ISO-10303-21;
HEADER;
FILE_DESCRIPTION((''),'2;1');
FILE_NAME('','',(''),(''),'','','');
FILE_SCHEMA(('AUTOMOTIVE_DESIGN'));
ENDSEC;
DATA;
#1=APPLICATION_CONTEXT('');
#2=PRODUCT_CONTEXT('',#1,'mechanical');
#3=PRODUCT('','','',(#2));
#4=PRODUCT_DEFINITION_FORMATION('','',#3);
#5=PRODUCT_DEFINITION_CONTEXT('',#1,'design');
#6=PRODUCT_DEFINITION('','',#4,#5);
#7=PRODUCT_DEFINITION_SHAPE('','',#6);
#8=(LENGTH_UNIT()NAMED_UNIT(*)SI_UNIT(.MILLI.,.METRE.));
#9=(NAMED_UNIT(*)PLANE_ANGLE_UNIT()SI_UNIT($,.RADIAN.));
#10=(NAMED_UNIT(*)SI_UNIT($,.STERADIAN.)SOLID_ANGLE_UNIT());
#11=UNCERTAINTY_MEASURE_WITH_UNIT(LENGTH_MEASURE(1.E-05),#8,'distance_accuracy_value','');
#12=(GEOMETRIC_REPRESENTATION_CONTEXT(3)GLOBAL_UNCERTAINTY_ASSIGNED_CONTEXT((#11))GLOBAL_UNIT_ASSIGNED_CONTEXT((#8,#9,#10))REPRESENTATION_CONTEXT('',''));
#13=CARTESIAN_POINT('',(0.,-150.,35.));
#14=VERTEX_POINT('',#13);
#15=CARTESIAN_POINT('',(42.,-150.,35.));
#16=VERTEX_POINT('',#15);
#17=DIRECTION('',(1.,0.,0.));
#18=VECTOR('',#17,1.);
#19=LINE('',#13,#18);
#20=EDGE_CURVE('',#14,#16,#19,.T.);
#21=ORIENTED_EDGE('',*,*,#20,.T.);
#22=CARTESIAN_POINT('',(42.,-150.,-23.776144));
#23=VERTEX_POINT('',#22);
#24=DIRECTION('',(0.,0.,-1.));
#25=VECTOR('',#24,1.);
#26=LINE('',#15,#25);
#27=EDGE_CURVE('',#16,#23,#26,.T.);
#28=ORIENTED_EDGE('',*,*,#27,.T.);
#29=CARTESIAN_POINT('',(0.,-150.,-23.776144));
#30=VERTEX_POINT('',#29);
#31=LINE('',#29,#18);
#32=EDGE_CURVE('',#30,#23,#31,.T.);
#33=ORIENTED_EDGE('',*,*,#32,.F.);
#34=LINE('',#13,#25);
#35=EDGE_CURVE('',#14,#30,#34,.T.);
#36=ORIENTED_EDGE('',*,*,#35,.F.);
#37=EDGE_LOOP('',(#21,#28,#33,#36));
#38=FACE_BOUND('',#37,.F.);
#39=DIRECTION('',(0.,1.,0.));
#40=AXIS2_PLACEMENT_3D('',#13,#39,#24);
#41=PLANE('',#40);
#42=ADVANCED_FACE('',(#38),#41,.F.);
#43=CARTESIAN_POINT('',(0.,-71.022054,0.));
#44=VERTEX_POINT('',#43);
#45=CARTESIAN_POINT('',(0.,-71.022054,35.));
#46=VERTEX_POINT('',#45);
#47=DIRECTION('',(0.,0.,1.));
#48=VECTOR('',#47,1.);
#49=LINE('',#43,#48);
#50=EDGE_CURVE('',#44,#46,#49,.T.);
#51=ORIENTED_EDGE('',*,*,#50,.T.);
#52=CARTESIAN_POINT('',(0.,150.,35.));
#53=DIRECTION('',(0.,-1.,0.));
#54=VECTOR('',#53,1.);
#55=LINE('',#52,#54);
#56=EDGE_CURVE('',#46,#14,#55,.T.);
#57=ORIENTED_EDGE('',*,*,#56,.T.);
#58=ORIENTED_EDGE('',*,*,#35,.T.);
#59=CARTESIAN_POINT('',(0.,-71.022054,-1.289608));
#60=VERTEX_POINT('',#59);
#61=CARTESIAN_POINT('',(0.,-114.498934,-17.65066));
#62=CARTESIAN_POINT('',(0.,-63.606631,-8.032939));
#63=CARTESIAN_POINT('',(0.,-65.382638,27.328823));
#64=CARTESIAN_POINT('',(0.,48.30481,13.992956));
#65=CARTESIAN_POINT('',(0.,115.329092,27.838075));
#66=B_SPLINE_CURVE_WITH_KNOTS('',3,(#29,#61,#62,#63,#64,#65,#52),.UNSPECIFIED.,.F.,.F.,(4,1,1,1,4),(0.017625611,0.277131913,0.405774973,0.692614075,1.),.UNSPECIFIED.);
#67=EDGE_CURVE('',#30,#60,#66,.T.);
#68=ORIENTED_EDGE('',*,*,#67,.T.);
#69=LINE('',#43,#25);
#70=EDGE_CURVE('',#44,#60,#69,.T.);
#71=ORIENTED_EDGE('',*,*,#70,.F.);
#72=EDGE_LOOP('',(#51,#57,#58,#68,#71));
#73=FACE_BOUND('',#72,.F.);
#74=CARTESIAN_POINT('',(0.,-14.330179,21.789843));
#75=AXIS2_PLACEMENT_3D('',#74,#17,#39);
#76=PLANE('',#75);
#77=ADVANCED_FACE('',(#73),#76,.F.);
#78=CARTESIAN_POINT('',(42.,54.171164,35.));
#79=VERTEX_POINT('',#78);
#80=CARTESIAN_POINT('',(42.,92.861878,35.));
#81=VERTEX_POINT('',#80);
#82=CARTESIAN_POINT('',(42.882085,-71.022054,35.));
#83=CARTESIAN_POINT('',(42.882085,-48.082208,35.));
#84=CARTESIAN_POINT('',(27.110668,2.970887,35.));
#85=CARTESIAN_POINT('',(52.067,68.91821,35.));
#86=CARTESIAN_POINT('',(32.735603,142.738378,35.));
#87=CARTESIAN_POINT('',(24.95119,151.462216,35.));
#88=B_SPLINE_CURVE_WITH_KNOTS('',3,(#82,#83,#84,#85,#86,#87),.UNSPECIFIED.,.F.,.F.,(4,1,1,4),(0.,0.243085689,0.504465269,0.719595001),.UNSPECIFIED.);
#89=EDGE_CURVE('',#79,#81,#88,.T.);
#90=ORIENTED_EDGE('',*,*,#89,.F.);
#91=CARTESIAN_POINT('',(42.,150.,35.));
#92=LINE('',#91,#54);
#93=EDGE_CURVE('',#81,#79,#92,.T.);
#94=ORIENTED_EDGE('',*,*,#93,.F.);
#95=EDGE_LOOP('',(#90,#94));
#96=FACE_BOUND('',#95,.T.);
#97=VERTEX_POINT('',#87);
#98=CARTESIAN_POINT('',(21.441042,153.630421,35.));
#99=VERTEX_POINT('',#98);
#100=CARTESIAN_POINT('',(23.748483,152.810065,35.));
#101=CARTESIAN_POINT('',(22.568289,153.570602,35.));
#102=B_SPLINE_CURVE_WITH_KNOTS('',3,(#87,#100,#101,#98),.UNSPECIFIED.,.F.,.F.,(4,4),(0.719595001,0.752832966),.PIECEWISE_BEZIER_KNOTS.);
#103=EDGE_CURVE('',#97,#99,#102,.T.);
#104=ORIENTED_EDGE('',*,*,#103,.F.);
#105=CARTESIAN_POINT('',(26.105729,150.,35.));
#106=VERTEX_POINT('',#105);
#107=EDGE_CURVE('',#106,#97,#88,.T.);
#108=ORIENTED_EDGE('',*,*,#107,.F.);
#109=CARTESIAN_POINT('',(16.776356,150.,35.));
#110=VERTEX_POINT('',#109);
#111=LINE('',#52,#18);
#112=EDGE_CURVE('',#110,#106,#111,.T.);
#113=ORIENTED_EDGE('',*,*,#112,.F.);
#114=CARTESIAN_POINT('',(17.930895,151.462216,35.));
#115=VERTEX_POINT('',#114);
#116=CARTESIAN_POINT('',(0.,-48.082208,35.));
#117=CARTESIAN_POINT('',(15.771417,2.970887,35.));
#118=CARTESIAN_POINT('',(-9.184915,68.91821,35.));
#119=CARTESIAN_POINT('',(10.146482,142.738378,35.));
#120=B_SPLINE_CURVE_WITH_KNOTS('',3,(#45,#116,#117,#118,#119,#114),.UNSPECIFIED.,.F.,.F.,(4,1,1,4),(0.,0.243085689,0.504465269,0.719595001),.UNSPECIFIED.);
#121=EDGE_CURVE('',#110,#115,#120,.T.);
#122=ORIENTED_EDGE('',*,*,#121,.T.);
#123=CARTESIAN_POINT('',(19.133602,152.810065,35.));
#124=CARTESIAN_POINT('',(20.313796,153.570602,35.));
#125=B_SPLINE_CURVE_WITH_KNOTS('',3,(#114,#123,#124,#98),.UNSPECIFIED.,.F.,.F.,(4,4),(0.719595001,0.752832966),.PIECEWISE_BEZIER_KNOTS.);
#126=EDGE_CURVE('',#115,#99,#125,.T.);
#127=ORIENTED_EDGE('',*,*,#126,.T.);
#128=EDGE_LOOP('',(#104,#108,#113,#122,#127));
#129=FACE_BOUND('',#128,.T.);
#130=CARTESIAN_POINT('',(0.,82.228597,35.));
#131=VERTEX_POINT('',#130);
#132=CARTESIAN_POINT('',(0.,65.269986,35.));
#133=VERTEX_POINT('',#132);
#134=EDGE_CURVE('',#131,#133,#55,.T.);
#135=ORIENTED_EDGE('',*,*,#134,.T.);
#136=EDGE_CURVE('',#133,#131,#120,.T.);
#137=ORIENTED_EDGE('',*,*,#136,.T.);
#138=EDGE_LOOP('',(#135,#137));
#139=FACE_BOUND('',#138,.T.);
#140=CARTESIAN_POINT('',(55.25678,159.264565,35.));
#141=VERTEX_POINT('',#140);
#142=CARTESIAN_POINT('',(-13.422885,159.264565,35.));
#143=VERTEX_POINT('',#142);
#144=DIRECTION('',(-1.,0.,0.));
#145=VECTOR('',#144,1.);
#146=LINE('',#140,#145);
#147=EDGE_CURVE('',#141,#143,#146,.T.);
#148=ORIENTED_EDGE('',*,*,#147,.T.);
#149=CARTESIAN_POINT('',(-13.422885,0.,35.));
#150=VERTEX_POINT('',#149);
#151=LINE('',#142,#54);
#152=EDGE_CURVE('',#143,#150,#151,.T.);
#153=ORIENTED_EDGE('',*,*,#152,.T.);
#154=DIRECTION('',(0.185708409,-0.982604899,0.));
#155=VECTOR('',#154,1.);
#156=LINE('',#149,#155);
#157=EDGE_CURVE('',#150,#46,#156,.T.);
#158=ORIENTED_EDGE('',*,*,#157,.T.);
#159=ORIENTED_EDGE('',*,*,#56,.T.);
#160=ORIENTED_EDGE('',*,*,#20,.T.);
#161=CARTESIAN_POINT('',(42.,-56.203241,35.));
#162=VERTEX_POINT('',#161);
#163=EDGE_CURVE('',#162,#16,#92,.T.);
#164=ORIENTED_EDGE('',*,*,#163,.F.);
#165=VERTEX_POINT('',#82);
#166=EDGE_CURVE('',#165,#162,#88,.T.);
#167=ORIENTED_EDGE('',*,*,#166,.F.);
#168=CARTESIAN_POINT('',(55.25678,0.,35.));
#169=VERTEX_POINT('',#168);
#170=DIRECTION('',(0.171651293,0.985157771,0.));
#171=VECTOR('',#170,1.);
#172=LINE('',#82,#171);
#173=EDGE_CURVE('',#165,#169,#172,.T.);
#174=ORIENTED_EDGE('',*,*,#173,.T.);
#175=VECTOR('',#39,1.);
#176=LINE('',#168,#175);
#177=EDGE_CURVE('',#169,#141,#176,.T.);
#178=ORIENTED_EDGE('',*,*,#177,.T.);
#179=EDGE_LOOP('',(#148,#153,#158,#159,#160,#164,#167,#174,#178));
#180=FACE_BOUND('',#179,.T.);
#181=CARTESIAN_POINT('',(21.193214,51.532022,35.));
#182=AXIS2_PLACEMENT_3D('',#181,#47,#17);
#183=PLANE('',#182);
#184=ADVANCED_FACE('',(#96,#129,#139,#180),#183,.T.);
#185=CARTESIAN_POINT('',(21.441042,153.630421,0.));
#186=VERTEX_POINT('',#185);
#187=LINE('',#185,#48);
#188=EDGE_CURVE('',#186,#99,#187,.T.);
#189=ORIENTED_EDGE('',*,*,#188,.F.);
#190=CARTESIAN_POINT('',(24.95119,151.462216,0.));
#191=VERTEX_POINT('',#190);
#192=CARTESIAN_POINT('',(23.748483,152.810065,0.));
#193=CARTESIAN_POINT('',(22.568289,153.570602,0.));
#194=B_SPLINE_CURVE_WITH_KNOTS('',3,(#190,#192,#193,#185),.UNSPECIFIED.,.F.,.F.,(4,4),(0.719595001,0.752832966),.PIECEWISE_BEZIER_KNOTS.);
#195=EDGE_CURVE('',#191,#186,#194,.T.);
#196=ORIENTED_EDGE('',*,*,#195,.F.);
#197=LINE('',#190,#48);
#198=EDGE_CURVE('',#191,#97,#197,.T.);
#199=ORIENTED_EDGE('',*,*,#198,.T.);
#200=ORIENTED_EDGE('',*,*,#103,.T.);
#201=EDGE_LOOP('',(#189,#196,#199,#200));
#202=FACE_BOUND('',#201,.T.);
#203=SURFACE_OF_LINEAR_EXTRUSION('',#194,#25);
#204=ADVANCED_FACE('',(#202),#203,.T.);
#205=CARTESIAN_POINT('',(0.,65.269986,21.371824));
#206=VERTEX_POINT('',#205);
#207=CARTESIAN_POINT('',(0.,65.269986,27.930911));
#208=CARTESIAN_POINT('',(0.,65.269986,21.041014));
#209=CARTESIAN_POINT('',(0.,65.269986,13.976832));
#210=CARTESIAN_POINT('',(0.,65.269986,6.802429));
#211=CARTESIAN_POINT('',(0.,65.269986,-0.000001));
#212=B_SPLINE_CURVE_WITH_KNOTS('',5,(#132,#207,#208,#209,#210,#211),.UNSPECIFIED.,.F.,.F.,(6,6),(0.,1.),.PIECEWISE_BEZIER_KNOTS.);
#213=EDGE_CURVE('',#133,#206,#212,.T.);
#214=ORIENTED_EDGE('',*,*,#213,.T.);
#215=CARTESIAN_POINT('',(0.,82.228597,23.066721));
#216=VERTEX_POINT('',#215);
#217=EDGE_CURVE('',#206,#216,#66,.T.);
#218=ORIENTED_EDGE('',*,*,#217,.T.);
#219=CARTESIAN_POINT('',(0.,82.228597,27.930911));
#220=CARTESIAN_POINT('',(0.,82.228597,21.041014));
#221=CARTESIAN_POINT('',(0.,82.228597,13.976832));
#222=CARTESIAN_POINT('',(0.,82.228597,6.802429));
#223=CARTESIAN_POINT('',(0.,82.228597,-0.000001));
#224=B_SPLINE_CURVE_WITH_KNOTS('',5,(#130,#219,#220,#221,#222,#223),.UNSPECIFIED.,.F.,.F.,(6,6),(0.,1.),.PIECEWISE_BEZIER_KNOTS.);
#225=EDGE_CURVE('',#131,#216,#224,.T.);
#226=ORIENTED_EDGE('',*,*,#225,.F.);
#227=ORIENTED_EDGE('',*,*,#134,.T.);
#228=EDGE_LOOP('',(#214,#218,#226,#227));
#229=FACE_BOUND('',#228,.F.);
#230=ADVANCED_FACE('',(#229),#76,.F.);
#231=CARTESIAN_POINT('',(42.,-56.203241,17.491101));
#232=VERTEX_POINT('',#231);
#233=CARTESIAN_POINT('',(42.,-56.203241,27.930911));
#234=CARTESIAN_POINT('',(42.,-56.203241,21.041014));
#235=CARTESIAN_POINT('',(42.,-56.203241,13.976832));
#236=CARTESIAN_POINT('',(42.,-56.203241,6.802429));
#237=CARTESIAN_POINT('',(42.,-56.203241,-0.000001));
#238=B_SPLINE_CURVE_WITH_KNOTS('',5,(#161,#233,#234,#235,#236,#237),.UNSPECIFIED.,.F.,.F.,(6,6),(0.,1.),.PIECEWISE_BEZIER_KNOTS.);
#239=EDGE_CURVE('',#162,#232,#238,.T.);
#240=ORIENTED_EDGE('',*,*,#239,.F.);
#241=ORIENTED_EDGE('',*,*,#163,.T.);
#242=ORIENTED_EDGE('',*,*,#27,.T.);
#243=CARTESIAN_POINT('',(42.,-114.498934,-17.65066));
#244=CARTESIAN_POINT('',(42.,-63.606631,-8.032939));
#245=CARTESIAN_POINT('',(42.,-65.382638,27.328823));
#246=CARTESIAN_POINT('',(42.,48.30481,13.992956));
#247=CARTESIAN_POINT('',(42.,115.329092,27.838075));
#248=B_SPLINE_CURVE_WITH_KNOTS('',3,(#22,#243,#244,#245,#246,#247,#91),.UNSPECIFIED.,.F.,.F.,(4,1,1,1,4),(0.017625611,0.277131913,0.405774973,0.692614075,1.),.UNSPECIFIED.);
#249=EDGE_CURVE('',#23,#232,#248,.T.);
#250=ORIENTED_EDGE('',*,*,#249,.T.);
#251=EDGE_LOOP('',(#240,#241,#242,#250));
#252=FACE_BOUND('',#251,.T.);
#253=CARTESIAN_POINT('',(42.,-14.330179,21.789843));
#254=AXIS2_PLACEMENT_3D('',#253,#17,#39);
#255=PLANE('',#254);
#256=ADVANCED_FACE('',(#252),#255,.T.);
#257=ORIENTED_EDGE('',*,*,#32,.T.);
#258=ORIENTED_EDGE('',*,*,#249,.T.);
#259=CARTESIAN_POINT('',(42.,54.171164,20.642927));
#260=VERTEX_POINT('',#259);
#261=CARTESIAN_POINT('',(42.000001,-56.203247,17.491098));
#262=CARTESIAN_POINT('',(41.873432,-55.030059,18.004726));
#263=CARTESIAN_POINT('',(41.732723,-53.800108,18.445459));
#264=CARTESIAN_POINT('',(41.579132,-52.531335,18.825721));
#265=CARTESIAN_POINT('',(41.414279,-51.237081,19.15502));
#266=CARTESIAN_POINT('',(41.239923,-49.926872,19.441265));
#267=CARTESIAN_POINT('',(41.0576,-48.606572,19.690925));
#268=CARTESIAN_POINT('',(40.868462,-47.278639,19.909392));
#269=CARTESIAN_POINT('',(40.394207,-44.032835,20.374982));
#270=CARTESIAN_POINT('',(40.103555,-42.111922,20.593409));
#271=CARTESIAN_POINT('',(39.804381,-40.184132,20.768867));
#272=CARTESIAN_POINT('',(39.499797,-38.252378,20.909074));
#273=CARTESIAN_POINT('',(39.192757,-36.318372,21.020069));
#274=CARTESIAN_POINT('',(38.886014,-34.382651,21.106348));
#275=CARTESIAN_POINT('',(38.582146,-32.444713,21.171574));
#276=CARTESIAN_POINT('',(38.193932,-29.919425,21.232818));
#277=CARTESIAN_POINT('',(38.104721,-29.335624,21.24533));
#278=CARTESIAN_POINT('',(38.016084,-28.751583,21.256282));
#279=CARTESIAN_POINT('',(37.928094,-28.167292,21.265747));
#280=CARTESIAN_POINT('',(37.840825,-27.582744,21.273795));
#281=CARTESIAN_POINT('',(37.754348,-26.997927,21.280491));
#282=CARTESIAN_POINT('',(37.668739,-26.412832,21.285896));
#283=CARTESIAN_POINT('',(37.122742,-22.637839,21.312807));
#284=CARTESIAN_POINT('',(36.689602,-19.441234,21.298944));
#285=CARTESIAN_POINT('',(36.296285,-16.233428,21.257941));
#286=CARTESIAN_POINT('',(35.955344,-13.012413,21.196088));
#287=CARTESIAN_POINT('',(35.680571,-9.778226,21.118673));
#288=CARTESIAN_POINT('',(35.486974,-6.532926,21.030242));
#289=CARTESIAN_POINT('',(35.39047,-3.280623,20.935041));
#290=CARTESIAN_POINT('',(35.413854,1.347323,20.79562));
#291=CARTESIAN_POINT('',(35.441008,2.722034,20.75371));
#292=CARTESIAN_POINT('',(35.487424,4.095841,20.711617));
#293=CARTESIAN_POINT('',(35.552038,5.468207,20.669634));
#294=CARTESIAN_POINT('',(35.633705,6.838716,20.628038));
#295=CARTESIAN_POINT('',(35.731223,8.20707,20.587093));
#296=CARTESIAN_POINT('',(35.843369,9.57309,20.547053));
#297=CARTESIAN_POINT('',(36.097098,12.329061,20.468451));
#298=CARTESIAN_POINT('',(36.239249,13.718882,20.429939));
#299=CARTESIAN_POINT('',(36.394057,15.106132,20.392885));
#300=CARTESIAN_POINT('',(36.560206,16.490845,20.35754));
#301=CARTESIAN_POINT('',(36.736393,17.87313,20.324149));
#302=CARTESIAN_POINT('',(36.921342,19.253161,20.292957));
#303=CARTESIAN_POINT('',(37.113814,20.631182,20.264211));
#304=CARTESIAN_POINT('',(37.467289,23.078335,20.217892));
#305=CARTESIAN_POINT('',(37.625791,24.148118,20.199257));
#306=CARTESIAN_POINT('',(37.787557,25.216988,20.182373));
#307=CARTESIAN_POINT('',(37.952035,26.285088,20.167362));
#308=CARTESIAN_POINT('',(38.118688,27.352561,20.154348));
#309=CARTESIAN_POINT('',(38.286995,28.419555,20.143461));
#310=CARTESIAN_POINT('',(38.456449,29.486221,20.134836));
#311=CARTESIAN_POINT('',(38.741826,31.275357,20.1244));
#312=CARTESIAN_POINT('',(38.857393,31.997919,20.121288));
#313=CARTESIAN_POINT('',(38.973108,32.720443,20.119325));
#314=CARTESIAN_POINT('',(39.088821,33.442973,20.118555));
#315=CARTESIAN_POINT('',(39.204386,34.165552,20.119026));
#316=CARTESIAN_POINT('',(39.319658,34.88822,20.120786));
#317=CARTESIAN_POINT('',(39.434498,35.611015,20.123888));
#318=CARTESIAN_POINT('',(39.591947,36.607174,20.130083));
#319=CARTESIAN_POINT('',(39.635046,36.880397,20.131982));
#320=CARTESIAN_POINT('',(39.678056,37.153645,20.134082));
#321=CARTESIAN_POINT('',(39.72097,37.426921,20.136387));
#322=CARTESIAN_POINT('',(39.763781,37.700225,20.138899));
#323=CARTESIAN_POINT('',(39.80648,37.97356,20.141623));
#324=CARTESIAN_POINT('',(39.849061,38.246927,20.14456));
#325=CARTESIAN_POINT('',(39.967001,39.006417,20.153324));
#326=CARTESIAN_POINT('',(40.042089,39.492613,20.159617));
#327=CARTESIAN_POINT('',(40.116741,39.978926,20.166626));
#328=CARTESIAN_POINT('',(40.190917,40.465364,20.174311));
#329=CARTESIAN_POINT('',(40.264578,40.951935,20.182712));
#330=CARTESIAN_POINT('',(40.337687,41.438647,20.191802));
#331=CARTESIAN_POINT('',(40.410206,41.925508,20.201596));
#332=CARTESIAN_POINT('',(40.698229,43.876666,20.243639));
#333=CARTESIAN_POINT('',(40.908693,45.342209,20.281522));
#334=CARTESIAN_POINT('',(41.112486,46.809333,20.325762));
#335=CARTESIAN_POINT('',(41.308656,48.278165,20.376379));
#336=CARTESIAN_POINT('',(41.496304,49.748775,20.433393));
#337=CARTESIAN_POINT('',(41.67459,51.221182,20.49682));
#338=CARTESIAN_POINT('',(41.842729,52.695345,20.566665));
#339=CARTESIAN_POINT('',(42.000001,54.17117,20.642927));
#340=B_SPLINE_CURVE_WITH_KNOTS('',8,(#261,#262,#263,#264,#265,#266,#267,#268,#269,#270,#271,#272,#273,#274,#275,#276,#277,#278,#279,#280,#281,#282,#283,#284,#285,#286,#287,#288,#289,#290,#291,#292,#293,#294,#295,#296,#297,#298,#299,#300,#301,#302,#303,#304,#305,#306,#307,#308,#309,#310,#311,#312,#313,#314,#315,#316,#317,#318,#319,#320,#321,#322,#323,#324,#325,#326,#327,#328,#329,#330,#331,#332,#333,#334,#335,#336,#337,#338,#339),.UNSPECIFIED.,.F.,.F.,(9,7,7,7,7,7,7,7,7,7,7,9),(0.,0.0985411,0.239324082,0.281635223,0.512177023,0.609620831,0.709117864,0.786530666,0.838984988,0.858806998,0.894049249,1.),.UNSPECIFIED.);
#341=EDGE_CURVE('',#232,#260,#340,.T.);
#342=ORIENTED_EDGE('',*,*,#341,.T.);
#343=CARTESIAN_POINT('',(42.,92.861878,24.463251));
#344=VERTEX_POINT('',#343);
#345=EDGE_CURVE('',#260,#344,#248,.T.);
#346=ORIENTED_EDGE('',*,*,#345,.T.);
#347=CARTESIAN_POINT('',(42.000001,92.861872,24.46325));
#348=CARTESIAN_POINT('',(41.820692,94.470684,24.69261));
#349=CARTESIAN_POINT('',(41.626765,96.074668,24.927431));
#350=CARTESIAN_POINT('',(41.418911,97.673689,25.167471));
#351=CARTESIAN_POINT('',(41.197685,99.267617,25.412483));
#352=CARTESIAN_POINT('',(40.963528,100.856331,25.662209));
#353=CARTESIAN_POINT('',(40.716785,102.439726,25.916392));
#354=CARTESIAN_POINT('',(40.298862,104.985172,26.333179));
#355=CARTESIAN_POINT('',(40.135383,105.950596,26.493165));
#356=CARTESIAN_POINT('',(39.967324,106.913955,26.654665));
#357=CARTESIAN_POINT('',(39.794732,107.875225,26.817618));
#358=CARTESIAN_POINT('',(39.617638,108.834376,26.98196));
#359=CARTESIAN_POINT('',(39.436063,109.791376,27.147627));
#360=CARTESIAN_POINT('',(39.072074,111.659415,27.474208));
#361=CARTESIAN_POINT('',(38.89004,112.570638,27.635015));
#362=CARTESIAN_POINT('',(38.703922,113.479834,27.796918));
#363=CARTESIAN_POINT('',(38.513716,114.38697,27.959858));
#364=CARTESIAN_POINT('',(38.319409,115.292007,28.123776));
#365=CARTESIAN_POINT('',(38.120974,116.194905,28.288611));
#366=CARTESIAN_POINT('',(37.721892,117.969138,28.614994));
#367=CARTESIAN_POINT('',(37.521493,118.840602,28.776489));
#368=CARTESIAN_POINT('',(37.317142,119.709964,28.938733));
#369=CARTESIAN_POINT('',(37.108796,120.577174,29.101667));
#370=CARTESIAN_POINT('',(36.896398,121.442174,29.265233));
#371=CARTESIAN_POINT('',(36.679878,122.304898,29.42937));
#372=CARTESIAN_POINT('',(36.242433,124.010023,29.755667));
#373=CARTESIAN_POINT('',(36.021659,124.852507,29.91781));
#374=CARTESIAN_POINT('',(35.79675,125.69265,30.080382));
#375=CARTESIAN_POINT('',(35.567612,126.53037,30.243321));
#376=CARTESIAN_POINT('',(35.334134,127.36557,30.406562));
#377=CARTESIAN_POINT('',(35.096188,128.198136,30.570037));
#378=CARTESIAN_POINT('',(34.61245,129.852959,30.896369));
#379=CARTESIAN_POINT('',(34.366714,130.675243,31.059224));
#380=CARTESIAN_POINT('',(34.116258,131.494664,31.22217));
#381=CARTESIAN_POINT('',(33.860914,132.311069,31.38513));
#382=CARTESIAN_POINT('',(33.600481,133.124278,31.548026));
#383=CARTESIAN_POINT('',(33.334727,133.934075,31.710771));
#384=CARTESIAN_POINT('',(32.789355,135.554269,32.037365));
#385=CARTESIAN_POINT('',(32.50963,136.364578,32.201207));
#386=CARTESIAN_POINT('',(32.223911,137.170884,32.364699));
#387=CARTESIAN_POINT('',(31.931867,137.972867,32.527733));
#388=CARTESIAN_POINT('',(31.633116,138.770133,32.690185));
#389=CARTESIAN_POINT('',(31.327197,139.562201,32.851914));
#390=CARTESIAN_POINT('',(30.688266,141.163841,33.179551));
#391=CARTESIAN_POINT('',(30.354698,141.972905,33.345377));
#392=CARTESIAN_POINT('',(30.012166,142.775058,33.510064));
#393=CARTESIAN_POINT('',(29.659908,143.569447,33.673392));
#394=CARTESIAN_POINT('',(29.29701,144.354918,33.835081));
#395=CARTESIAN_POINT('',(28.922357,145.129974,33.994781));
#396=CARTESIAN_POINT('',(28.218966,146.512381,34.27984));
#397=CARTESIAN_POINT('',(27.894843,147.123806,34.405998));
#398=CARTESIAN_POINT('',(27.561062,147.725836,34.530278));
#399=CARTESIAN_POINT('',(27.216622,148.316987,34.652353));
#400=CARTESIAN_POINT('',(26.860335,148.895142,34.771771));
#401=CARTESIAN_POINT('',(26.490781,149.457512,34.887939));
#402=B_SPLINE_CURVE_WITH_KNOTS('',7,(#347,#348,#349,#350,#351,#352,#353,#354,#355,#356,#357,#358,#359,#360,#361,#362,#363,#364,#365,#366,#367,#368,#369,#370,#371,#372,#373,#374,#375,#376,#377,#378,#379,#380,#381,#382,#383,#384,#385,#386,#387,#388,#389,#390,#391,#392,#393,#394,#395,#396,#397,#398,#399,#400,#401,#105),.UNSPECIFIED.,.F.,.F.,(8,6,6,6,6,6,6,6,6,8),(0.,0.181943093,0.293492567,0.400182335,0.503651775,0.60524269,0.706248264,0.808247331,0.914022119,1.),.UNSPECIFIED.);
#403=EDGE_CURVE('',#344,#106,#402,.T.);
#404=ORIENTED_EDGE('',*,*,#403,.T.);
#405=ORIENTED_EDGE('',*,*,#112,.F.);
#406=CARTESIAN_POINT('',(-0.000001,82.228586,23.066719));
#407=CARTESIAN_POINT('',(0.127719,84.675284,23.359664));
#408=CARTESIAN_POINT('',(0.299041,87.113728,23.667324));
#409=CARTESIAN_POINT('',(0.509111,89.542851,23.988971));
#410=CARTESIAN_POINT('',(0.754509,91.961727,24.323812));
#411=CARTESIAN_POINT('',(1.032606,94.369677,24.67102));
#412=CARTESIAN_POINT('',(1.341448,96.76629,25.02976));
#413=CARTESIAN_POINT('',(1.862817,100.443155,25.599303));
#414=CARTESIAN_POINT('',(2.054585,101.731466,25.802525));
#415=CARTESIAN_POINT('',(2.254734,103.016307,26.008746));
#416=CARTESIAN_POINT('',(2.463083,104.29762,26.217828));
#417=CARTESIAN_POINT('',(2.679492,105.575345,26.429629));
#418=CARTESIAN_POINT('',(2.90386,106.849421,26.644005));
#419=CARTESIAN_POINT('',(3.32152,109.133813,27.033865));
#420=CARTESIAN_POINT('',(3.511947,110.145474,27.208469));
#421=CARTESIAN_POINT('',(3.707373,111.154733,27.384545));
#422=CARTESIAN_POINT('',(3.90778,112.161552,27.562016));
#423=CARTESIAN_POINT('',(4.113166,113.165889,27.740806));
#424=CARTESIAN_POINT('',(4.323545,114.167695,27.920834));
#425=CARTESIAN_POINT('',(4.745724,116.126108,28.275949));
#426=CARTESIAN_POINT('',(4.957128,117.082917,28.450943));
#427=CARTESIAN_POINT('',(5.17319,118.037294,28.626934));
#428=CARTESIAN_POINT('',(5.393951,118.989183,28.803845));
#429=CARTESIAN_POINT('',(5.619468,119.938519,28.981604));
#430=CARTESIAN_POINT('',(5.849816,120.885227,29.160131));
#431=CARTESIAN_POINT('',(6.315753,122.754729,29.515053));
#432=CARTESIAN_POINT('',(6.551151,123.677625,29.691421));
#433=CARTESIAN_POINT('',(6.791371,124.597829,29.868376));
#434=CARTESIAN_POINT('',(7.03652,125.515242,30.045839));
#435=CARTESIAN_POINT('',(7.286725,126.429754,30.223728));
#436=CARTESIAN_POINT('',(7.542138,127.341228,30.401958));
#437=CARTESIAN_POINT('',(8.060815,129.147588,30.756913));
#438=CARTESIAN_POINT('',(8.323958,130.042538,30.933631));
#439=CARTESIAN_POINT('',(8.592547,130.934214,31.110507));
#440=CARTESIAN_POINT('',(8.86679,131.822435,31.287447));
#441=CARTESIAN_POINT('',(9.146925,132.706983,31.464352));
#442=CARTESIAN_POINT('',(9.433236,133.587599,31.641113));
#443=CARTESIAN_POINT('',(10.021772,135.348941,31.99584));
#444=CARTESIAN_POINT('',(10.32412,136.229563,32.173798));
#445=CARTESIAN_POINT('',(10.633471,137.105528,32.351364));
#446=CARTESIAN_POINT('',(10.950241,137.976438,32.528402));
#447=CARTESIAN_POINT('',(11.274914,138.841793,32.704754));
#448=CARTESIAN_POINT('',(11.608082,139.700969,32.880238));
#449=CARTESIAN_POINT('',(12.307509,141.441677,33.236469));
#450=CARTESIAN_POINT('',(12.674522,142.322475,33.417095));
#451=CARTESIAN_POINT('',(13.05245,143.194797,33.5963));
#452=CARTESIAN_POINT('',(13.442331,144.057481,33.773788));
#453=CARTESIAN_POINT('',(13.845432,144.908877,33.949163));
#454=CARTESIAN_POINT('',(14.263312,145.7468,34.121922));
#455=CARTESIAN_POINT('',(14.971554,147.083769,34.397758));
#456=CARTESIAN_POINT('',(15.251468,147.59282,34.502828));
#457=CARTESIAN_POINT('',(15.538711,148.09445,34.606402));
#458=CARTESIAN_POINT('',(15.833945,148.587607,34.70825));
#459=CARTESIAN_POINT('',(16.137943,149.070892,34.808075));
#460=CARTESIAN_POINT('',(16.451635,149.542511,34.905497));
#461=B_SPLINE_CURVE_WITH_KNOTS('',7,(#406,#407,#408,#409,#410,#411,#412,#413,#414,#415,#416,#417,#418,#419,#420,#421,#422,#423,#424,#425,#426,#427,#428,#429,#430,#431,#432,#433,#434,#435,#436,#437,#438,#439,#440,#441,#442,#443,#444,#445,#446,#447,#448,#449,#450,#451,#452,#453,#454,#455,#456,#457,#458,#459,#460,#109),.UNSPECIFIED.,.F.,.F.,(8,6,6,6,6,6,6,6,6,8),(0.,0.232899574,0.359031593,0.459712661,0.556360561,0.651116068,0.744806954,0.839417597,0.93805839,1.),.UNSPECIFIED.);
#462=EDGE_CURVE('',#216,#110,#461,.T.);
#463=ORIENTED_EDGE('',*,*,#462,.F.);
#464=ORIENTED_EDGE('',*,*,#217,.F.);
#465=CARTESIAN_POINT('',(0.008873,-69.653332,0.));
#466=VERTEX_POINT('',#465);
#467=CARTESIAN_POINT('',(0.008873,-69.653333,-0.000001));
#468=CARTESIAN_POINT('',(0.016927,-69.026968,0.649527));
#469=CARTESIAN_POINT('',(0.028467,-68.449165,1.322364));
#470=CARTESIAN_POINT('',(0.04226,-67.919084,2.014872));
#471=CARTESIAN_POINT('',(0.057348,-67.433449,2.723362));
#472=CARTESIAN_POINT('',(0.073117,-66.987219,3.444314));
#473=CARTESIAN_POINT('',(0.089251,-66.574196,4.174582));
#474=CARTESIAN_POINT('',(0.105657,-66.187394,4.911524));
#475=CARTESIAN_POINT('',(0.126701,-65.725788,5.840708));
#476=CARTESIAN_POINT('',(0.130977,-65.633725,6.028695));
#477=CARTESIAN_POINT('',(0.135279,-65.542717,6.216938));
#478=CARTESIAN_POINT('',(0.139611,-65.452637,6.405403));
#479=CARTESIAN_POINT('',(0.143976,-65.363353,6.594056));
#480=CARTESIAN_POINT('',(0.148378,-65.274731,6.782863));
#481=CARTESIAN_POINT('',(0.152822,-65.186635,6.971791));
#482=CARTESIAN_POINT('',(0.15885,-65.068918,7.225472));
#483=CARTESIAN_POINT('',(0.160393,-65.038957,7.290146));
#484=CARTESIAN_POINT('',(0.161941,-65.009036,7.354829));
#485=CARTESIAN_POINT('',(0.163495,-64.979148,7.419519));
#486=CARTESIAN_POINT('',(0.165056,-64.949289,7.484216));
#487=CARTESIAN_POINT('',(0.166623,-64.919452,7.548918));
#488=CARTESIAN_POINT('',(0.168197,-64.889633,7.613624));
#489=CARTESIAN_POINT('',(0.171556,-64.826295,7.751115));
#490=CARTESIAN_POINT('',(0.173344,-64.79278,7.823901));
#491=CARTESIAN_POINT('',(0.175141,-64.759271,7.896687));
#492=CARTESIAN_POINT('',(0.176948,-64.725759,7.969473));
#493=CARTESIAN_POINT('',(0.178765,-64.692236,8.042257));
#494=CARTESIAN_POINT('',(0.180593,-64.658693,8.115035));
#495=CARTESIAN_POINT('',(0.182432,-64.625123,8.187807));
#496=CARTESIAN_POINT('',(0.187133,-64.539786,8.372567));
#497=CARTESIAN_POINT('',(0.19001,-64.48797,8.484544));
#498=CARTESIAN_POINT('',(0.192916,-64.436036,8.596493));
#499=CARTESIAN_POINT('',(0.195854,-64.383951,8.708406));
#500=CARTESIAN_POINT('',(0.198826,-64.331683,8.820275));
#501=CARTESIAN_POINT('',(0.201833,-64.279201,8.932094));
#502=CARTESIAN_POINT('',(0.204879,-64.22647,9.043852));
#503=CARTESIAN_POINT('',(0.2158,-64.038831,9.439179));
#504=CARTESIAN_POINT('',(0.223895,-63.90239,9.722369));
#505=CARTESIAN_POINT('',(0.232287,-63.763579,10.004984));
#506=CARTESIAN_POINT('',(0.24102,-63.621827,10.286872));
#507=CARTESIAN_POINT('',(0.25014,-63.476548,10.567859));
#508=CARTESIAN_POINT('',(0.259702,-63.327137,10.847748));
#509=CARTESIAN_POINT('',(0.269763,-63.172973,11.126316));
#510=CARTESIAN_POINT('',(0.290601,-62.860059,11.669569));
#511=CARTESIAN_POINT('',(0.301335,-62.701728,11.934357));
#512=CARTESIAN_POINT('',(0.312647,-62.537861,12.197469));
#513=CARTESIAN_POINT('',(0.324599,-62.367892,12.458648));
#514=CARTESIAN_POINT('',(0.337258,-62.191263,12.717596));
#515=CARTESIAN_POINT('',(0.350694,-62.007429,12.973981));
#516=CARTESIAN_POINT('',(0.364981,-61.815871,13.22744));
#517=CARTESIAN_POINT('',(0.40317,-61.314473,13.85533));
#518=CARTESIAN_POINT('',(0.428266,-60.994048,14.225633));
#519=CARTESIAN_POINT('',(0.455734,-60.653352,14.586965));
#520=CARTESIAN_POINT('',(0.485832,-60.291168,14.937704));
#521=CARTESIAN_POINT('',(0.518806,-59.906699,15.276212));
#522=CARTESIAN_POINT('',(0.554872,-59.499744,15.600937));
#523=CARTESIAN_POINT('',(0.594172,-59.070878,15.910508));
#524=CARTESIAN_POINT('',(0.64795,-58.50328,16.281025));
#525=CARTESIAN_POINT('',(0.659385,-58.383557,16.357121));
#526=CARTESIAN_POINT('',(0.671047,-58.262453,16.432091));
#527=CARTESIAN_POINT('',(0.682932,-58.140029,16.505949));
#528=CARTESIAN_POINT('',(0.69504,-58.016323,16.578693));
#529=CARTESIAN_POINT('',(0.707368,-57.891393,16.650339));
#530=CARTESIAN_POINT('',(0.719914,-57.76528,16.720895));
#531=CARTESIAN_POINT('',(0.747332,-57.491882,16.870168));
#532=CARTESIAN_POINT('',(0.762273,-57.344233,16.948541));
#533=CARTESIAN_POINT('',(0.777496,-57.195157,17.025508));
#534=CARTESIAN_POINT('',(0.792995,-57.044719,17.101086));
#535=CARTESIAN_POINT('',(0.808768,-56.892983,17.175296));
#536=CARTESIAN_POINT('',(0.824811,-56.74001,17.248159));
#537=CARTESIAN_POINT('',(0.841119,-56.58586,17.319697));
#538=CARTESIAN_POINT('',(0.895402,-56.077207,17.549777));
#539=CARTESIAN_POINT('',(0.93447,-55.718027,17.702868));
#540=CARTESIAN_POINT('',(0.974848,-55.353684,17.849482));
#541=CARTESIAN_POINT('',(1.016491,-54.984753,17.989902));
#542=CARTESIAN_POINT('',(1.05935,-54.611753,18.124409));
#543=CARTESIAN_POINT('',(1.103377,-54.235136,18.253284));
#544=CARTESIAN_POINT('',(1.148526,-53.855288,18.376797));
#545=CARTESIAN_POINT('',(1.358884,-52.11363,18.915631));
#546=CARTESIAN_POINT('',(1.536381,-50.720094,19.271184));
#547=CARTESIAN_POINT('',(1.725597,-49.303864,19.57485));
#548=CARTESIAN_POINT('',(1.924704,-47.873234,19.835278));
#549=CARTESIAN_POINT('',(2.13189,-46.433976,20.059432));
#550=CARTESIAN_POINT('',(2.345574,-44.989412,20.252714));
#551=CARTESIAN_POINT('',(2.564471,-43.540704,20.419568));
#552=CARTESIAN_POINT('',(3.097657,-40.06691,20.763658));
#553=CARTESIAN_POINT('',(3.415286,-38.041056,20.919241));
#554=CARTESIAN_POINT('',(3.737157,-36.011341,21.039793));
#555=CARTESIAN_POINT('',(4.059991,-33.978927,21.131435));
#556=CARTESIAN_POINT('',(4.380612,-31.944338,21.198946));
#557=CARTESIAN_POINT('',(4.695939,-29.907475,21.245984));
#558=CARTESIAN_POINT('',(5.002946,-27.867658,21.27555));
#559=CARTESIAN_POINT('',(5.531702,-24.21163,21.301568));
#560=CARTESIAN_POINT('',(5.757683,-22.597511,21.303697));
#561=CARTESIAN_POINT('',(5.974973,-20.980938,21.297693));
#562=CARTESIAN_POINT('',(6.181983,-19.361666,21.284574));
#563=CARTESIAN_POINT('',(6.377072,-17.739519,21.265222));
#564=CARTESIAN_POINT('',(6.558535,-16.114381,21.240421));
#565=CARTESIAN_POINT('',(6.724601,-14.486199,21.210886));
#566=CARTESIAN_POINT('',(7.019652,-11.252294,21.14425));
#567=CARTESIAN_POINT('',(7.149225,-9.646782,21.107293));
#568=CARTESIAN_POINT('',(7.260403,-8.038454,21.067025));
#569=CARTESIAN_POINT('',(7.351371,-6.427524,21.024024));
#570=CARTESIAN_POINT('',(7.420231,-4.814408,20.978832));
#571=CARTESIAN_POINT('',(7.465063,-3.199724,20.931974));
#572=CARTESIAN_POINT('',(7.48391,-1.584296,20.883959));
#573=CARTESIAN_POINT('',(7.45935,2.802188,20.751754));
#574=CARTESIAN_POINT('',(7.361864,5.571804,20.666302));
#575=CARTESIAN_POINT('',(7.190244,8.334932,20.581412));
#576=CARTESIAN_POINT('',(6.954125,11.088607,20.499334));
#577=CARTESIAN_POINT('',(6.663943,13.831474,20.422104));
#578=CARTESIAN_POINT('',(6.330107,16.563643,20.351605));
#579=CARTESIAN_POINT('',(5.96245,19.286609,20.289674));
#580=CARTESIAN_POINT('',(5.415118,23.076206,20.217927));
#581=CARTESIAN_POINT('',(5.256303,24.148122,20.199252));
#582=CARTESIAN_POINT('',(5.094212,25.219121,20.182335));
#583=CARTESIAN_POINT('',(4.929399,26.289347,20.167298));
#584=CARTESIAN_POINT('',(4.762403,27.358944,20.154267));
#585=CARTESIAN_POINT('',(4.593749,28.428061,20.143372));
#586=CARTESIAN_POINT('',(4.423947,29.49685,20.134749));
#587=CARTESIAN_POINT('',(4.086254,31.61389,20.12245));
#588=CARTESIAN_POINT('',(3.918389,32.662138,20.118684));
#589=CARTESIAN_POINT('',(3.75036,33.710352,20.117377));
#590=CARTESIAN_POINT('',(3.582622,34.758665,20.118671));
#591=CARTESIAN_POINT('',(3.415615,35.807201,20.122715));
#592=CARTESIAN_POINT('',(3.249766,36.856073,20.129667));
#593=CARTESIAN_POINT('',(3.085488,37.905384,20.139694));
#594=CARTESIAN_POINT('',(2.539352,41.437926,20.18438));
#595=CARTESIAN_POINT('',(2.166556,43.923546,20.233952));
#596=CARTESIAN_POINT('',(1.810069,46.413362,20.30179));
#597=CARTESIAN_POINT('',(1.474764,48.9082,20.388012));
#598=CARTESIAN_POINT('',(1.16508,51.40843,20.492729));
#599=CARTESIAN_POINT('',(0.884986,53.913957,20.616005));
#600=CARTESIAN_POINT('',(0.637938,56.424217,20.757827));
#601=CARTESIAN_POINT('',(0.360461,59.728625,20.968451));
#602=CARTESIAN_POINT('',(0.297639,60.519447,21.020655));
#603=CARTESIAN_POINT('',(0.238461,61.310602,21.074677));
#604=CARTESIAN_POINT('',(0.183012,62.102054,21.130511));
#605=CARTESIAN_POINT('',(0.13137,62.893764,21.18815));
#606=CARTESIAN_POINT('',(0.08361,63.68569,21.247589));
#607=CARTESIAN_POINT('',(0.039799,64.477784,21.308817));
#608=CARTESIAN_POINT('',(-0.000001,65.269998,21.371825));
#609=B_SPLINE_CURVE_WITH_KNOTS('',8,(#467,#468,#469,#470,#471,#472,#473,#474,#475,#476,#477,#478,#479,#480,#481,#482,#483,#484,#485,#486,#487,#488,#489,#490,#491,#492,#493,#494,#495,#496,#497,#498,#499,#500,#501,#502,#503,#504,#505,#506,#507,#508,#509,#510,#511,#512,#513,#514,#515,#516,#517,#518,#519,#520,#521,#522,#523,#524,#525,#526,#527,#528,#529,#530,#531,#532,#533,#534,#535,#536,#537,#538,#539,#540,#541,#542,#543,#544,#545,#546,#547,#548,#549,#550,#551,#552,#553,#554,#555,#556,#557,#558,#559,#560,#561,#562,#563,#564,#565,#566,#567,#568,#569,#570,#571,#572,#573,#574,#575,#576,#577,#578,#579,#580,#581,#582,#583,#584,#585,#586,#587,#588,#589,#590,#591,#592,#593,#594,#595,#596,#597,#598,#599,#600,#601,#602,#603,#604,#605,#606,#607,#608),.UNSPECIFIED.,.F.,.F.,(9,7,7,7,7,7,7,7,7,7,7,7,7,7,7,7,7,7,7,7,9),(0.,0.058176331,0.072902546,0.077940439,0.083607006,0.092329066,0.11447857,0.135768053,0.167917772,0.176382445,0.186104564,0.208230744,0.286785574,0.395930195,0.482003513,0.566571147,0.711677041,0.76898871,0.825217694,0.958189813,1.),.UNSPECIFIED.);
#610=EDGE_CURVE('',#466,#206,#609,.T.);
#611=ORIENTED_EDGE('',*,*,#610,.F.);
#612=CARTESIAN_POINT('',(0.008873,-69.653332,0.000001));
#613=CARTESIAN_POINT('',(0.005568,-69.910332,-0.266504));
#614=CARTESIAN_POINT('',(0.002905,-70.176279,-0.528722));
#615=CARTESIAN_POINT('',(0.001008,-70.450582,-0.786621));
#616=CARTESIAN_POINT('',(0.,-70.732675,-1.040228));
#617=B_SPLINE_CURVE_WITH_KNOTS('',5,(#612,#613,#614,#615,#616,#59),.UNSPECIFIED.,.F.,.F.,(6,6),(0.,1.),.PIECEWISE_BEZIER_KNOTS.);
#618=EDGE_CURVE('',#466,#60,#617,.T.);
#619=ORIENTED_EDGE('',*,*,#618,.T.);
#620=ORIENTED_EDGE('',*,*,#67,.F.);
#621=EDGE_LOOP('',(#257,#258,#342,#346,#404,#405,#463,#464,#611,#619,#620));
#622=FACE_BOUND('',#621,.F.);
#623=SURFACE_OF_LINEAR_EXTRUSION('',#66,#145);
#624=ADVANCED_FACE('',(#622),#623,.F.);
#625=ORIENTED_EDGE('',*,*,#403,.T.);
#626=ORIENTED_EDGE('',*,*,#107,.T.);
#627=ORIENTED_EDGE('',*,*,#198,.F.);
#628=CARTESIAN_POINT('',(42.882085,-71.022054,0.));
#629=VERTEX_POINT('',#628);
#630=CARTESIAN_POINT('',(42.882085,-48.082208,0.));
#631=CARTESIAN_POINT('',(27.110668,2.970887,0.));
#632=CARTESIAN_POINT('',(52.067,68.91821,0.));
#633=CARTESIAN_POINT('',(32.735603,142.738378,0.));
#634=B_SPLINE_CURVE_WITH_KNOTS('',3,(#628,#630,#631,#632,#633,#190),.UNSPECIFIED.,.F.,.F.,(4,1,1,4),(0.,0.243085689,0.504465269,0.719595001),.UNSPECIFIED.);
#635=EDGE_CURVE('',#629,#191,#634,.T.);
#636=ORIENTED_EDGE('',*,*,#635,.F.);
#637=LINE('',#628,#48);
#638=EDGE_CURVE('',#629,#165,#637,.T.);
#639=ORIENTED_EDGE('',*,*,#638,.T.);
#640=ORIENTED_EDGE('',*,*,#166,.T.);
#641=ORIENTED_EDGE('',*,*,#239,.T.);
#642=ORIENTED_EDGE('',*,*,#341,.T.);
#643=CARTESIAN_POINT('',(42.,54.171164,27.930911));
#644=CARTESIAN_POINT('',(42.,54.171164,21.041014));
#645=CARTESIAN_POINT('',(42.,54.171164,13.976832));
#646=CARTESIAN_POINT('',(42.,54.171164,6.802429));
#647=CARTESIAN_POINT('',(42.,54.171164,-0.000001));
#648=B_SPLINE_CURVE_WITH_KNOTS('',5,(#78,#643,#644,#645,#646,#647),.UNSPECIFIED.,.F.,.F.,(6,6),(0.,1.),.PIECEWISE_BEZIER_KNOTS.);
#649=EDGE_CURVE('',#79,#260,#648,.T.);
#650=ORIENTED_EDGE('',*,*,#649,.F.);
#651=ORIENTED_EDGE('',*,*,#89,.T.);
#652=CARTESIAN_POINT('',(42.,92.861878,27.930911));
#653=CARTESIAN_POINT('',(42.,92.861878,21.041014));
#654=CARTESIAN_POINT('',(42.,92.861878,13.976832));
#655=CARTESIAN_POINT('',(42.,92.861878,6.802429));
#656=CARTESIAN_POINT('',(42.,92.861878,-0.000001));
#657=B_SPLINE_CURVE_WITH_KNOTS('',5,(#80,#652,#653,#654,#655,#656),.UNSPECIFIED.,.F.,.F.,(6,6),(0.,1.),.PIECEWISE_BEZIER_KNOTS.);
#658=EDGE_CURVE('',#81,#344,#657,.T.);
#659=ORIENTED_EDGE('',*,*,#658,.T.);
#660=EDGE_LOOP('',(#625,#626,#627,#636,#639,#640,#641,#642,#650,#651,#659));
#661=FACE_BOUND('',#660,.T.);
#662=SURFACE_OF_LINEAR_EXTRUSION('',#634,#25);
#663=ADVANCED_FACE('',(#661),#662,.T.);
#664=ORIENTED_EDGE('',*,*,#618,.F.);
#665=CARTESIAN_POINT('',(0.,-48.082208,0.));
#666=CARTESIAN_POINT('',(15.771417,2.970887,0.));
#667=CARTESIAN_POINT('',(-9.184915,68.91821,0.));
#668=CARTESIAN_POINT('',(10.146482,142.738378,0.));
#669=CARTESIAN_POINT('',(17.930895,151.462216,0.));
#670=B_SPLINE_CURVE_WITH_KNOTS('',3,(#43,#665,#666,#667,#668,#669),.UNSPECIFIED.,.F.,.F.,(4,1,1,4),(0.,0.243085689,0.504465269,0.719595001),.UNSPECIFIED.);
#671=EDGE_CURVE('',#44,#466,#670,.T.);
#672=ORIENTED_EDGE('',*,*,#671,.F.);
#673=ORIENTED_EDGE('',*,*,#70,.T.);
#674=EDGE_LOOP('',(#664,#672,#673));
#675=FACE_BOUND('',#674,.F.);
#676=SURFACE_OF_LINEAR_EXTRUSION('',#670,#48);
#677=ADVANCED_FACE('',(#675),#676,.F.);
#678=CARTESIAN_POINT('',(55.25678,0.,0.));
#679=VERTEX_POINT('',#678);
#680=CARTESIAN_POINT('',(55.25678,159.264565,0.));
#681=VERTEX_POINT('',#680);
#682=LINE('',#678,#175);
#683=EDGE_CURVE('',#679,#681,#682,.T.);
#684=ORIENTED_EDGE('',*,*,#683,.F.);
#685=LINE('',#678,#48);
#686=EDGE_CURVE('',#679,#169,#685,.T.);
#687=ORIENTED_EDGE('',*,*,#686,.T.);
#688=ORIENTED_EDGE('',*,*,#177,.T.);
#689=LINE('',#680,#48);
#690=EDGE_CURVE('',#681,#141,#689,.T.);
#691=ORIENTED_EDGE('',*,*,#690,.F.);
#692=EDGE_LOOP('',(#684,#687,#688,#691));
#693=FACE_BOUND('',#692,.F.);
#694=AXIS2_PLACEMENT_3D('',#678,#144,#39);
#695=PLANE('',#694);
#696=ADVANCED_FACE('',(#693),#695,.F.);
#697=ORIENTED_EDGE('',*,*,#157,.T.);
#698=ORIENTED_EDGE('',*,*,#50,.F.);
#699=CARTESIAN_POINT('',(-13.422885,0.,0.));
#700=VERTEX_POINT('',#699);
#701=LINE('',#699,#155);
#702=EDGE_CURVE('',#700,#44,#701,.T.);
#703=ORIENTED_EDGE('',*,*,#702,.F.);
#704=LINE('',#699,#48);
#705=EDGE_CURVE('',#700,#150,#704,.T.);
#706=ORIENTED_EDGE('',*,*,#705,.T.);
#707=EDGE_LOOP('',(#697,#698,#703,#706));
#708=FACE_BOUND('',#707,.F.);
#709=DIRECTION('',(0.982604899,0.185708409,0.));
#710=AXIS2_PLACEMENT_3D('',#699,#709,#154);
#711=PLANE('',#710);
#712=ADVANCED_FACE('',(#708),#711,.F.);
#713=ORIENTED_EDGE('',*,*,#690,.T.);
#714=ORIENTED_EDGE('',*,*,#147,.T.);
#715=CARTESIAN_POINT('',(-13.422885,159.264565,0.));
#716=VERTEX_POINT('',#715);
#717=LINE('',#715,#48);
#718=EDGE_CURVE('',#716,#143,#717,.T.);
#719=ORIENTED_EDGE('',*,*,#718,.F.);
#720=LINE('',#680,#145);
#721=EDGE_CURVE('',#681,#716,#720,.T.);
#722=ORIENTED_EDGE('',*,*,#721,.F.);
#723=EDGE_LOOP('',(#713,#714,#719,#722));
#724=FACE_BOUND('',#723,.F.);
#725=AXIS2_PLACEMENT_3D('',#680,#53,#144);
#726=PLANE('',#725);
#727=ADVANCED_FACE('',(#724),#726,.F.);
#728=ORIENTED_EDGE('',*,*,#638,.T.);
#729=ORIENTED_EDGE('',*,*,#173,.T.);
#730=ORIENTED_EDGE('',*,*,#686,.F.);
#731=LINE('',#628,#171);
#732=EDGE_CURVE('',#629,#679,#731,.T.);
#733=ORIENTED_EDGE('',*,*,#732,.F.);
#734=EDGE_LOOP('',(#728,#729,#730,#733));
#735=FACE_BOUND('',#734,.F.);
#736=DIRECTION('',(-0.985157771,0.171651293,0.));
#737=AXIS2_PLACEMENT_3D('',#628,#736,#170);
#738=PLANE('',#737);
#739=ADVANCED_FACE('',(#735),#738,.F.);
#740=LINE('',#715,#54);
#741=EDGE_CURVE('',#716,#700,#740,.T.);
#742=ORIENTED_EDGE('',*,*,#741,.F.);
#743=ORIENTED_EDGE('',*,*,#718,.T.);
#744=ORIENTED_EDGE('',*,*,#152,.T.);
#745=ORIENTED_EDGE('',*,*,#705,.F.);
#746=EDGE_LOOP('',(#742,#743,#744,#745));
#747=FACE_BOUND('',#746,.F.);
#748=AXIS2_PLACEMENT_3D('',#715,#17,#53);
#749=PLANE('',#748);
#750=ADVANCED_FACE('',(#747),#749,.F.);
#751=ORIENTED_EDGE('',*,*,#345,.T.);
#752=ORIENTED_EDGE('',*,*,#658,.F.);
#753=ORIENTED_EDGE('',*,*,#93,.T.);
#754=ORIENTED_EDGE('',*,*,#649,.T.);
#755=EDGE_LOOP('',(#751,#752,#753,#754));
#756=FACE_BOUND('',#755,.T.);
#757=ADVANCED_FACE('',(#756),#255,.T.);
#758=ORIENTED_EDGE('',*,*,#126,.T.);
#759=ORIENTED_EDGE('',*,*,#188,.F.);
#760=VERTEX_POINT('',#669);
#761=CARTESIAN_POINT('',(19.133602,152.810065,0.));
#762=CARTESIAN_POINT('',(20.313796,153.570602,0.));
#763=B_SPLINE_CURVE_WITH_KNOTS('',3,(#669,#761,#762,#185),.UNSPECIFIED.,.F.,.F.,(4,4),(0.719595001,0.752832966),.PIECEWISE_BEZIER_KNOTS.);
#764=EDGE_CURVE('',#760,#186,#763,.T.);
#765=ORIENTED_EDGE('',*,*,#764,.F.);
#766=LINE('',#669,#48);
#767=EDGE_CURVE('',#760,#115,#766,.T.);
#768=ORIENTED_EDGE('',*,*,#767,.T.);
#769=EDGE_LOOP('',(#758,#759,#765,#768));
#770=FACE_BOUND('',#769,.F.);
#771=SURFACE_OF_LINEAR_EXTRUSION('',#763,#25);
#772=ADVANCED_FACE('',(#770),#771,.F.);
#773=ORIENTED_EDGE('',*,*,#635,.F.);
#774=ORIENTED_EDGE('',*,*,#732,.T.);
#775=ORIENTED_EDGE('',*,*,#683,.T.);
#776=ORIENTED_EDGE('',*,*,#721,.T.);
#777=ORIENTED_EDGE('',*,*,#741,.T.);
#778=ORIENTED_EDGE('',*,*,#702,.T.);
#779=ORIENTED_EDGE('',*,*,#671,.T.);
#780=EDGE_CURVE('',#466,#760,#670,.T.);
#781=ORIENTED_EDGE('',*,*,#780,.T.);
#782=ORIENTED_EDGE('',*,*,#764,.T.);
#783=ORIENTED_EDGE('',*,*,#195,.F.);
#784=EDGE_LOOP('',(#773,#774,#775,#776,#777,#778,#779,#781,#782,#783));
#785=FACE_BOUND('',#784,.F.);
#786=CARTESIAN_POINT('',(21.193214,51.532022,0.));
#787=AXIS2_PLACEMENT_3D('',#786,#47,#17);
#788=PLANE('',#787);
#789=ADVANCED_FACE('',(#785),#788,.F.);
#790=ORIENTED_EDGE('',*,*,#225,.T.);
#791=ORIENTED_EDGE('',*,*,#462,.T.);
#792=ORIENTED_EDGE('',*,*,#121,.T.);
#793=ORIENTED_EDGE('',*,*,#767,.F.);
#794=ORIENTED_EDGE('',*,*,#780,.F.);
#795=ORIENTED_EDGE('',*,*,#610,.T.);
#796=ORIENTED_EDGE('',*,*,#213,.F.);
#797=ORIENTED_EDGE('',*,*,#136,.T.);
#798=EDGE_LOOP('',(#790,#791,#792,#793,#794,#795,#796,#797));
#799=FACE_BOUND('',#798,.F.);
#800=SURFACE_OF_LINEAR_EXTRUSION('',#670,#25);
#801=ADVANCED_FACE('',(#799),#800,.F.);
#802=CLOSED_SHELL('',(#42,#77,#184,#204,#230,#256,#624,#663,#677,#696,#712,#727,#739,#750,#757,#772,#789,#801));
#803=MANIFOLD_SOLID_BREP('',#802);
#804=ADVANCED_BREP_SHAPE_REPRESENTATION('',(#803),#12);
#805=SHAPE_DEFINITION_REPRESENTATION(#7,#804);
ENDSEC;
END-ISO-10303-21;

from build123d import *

# Parameters (mm, degrees)
F2_DEPTH = 42
F3_DEPTH = 50
F4_DEPTH = 35


with BuildPart() as f2:
    # F1 (on Right) → F2 (new body)
    with BuildSketch(Plane.YZ):
        with BuildLine():
            Line((150, 35), (-150, 35))
            Line((-150, 35), (-150, -23.7761443613))
            add(Edge.make_bspline(
                [(-150, -23.7761443613), (-114.4989336933, -17.6506601351), (-63.6066313007, -8.0329394516), (-65.3826376361, 27.3288233891), (48.3048096846, 13.9929555256), (115.32909223, 27.83807524), (150, 35)],
                knots=[0.0176256107, 0.0176256107, 0.0176256107, 0.0176256107, 0.2771319135, 0.4057749729, 0.6926140747, 1, 1, 1, 1], degree=3))
        make_face()
    extrude(amount=F2_DEPTH)

    # F0 (on Top) → F3 (cut)
    with BuildSketch(Plane.XY):
        with BuildLine():
            Line((-13.4228849784, 0), (0, -71.0220535528))
            add(Edge.make_bspline(
                [(0, -71.0220535528), (0, -48.0822075317), (15.7714172383, 2.9708873893), (-9.184915464, 68.9182100809), (10.146482255, 142.7383784786), (17.930894995, 151.4622155134)],
                knots=[0, 0, 0, 0, 0.2430856885, 0.5044652694, 0.7195950008, 0.7195950008, 0.7195950008, 0.7195950008], degree=3))
            add(Edge.make_bspline(
                [(21.4410424232, 153.6304205656), (20.2112647145, 153.6956795849), (19.0445034859, 152.9269522058), (17.930894995, 151.4622155134)],
                knots=[0.752832966, 0.752832966, 0.752832966, 0.752832966, 0.7890941529, 0.7890941529, 0.7890941529, 0.7890941529], degree=3))
            add(Edge.make_bspline(
                [(21.4410424232, 153.6304205656), (22.670820132, 153.6956795849), (23.8375813606, 152.9269522058), (24.9511898515, 151.4622155134)],
                knots=[0.752832966, 0.752832966, 0.752832966, 0.752832966, 0.7890941529, 0.7890941529, 0.7890941529, 0.7890941529], degree=3))
            add(Edge.make_bspline(
                [(42.8820848465, -71.0220535528), (42.8820848465, -48.0822075317), (27.1106676082, 2.9708873893), (52.0670003105, 68.9182100809), (32.7356025915, 142.7383784786), (24.9511898515, 151.4622155134)],
                knots=[0, 0, 0, 0, 0.2430856885, 0.5044652694, 0.7195950008, 0.7195950008, 0.7195950008, 0.7195950008], degree=3))
            Line((42.8820848465, -71.0220535528), (55.256780237, 0))
            Line((55.256780237, 0), (55.256780237, 159.2645645142))
            Line((55.256780237, 159.2645645142), (-13.4228849784, 159.2645645142))
            Line((-13.4228849784, 159.2645645142), (-13.4228849784, 0))
        make_face()
        with BuildLine():
            add(Edge.make_bspline(
                [(21.4410424232, 153.6304205656), (20.2112647145, 153.6956795849), (19.0445034859, 152.9269522058), (17.930894995, 151.4622155134)],
                knots=[0.752832966, 0.752832966, 0.752832966, 0.752832966, 0.7890941529, 0.7890941529, 0.7890941529, 0.7890941529], degree=3))
            add(Edge.make_bspline(
                [(17.930894995, 151.4622155134), (19.1336020212, 152.8100654344), (20.3137955765, 153.5706024186), (21.4410424232, 153.6304205656)],
                knots=[0.7195950008, 0.7195950008, 0.7195950008, 0.7195950008, 0.752832966, 0.752832966, 0.752832966, 0.752832966], degree=3))
        make_face()
        with BuildLine():
            add(Edge.make_bspline(
                [(21.4410424232, 153.6304205656), (22.670820132, 153.6956795849), (23.8375813606, 152.9269522058), (24.9511898515, 151.4622155134)],
                knots=[0.752832966, 0.752832966, 0.752832966, 0.752832966, 0.7890941529, 0.7890941529, 0.7890941529, 0.7890941529], degree=3))
            add(Edge.make_bspline(
                [(24.9511898515, 151.4622155134), (23.7484828253, 152.8100654344), (22.56828927, 153.5706024186), (21.4410424232, 153.6304205656)],
                knots=[0.7195950008, 0.7195950008, 0.7195950008, 0.7195950008, 0.752832966, 0.752832966, 0.752832966, 0.752832966], degree=3))
        make_face()
    extrude(amount=-F3_DEPTH, mode=Mode.SUBTRACT)

    # F0 (on Top) → F4 (join)
    with BuildSketch(Plane.XY):
        with BuildLine():
            Line((-13.4228849784, 0), (0, -71.0220535528))
            add(Edge.make_bspline(
                [(0, -71.0220535528), (0, -48.0822075317), (15.7714172383, 2.9708873893), (-9.184915464, 68.9182100809), (10.146482255, 142.7383784786), (17.930894995, 151.4622155134)],
                knots=[0, 0, 0, 0, 0.2430856885, 0.5044652694, 0.7195950008, 0.7195950008, 0.7195950008, 0.7195950008], degree=3))
            add(Edge.make_bspline(
                [(21.4410424232, 153.6304205656), (20.2112647145, 153.6956795849), (19.0445034859, 152.9269522058), (17.930894995, 151.4622155134)],
                knots=[0.752832966, 0.752832966, 0.752832966, 0.752832966, 0.7890941529, 0.7890941529, 0.7890941529, 0.7890941529], degree=3))
            add(Edge.make_bspline(
                [(21.4410424232, 153.6304205656), (22.670820132, 153.6956795849), (23.8375813606, 152.9269522058), (24.9511898515, 151.4622155134)],
                knots=[0.752832966, 0.752832966, 0.752832966, 0.752832966, 0.7890941529, 0.7890941529, 0.7890941529, 0.7890941529], degree=3))
            add(Edge.make_bspline(
                [(42.8820848465, -71.0220535528), (42.8820848465, -48.0822075317), (27.1106676082, 2.9708873893), (52.0670003105, 68.9182100809), (32.7356025915, 142.7383784786), (24.9511898515, 151.4622155134)],
                knots=[0, 0, 0, 0, 0.2430856885, 0.5044652694, 0.7195950008, 0.7195950008, 0.7195950008, 0.7195950008], degree=3))
            Line((42.8820848465, -71.0220535528), (55.256780237, 0))
            Line((55.256780237, 0), (55.256780237, 159.2645645142))
            Line((55.256780237, 159.2645645142), (-13.4228849784, 159.2645645142))
            Line((-13.4228849784, 159.2645645142), (-13.4228849784, 0))
        make_face()
        with BuildLine():
            add(Edge.make_bspline(
                [(21.4410424232, 153.6304205656), (20.2112647145, 153.6956795849), (19.0445034859, 152.9269522058), (17.930894995, 151.4622155134)],
                knots=[0.752832966, 0.752832966, 0.752832966, 0.752832966, 0.7890941529, 0.7890941529, 0.7890941529, 0.7890941529], degree=3))
            add(Edge.make_bspline(
                [(17.930894995, 151.4622155134), (19.1336020212, 152.8100654344), (20.3137955765, 153.5706024186), (21.4410424232, 153.6304205656)],
                knots=[0.7195950008, 0.7195950008, 0.7195950008, 0.7195950008, 0.752832966, 0.752832966, 0.752832966, 0.752832966], degree=3))
        make_face()
        with BuildLine():
            add(Edge.make_bspline(
                [(21.4410424232, 153.6304205656), (22.670820132, 153.6956795849), (23.8375813606, 152.9269522058), (24.9511898515, 151.4622155134)],
                knots=[0.752832966, 0.752832966, 0.752832966, 0.752832966, 0.7890941529, 0.7890941529, 0.7890941529, 0.7890941529], degree=3))
            add(Edge.make_bspline(
                [(24.9511898515, 151.4622155134), (23.7484828253, 152.8100654344), (22.56828927, 153.5706024186), (21.4410424232, 153.6304205656)],
                knots=[0.7195950008, 0.7195950008, 0.7195950008, 0.7195950008, 0.752832966, 0.752832966, 0.752832966, 0.752832966], degree=3))
        make_face()
    extrude(amount=F4_DEPTH)


solid = f2.part
